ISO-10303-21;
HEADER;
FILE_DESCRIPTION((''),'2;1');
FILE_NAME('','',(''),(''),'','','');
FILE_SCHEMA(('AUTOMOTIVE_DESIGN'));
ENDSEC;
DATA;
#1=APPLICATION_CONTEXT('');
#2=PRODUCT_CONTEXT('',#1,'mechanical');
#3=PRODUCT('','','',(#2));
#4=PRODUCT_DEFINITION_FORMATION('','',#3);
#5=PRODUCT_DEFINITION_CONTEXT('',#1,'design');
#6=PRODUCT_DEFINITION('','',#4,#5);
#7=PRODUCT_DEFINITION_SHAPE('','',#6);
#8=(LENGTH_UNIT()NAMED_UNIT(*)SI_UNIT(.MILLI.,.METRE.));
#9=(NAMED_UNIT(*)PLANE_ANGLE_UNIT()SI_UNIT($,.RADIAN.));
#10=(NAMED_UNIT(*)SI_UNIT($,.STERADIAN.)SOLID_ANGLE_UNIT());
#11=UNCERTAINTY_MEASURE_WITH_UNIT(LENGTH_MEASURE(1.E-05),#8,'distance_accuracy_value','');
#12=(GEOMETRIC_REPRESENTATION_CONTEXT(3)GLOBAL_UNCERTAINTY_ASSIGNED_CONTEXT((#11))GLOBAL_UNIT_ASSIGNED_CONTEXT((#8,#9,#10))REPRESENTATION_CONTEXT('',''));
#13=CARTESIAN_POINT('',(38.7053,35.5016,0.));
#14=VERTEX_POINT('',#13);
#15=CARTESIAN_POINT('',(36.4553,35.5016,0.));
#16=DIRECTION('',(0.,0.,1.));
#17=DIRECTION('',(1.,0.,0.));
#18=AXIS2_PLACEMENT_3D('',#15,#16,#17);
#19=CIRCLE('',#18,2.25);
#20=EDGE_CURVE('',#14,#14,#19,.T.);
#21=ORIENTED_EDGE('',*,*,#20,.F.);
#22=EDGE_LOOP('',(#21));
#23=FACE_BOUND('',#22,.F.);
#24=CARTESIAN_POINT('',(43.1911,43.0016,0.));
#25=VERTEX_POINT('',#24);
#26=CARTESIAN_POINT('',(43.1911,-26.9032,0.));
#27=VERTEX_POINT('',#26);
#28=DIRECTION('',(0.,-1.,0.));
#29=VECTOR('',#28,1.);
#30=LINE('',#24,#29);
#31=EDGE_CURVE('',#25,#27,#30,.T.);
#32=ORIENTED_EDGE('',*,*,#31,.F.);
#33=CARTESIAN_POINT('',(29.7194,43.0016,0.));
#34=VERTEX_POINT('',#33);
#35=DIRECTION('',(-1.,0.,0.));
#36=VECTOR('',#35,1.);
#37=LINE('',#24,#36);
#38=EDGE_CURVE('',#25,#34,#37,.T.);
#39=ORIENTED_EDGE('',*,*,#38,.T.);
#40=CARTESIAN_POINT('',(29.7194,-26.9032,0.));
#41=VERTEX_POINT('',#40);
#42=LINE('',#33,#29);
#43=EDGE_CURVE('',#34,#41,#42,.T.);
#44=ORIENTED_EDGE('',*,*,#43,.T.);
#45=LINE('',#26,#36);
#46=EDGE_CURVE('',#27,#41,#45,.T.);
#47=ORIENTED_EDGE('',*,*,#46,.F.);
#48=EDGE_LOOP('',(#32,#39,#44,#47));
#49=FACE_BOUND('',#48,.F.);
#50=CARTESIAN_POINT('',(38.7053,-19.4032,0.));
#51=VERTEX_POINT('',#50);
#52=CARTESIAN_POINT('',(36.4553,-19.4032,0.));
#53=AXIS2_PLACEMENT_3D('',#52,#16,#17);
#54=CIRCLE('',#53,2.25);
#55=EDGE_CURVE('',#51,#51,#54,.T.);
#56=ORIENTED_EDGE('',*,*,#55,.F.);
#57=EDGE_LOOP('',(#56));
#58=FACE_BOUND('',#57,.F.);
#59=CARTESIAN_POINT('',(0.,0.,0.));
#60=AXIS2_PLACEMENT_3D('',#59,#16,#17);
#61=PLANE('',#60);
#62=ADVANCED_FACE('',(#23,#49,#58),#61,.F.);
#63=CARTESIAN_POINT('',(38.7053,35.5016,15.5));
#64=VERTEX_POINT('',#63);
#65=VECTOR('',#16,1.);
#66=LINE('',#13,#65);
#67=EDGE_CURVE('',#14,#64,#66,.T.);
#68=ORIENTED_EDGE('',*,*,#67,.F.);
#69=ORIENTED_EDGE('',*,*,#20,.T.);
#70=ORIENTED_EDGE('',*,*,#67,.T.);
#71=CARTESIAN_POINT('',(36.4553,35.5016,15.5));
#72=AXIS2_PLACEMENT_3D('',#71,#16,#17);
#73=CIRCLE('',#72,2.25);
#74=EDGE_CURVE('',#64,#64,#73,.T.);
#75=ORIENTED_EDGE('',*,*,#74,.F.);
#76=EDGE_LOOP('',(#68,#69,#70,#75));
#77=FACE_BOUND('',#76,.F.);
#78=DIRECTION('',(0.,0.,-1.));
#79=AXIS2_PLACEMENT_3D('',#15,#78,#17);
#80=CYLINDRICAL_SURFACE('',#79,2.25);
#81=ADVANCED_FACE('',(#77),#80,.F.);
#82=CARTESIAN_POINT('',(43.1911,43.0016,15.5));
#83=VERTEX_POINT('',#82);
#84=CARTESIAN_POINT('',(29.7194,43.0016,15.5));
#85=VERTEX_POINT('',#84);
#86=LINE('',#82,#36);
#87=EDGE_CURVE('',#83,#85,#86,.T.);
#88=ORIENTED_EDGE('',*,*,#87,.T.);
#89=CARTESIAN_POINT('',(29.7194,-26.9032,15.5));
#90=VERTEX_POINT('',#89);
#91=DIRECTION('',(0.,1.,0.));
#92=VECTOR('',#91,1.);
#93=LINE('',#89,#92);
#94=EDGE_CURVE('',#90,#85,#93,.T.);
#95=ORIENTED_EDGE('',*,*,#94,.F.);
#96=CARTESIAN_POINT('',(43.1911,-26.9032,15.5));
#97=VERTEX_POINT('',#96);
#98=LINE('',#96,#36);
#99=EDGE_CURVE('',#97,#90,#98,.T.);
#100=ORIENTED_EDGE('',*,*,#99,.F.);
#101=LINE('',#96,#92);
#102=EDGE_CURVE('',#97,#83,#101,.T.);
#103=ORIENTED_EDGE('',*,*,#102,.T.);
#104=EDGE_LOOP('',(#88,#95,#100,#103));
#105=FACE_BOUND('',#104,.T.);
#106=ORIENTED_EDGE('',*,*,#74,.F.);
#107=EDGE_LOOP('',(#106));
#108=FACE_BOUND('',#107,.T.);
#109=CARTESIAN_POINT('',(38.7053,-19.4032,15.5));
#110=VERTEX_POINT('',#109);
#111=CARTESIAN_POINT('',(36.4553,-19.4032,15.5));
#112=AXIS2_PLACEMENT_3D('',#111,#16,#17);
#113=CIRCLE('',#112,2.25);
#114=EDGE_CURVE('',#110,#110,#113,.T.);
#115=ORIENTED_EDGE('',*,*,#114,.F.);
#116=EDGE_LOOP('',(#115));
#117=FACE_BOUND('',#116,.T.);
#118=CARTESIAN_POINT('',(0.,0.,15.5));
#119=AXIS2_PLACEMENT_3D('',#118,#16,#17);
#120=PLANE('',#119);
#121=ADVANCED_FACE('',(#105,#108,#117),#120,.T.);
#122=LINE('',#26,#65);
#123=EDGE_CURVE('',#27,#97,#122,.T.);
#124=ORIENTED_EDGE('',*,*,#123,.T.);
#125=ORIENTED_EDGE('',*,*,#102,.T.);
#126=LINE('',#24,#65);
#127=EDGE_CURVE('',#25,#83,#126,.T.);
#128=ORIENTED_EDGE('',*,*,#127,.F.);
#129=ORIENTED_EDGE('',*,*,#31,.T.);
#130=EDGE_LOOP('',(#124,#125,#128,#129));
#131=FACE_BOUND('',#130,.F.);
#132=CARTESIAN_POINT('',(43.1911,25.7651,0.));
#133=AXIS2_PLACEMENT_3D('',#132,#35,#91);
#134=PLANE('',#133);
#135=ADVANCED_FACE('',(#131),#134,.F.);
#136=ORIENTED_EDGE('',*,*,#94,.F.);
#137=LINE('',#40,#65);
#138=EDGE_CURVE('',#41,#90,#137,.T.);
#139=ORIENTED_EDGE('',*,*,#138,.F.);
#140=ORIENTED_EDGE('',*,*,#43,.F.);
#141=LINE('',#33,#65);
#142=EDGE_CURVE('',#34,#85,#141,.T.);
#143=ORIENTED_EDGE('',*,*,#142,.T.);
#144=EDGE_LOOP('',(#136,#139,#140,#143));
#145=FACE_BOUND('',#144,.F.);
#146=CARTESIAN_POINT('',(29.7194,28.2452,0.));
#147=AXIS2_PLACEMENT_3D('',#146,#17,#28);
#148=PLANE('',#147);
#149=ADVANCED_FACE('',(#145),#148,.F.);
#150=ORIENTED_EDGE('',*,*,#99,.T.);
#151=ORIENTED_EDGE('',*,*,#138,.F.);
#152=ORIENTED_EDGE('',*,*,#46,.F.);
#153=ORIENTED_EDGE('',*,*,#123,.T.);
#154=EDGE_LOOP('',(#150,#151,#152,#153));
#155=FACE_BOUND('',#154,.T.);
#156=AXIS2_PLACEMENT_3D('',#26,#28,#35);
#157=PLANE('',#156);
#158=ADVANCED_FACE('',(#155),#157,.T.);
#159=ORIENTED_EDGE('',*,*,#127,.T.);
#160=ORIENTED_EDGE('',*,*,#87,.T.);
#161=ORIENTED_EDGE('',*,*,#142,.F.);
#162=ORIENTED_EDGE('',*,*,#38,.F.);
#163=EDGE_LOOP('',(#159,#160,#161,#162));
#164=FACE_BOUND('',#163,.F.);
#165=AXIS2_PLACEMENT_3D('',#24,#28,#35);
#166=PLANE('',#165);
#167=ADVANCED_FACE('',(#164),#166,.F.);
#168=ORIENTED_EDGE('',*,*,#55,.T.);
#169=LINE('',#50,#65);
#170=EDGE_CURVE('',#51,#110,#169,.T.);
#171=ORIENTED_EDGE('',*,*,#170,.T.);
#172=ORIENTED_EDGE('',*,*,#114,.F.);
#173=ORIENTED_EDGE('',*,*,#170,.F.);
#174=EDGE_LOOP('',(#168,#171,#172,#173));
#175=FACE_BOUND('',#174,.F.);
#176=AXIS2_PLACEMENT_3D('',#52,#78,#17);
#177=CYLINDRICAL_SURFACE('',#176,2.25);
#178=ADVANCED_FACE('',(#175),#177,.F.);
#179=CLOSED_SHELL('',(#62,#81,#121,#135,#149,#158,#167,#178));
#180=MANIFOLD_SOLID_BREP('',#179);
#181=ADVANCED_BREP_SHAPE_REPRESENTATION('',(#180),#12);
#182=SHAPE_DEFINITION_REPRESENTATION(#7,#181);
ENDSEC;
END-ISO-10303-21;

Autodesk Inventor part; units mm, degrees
ref_plane "YZ Plane" through (0, 0, 0) normal (1, 0, 0) x (0, 1, 0)
ref_plane "XZ Plane" through (0, 0, 0) normal (0, 1, 0) x (-1, 0, 0)
ref_plane "XY Plane" through (0, 0, 0) normal (0, 0, 1) x (1, 0, 0)
ref_plane "Plan de construction1" through (0, 0, 0) normal (0, 0, 1) x (1, 0, 0)
sketch "Esquisse1" plane through (0, 0, 0) normal (0, 0, 1) x (1, 0, 0)
  circle A0 centre (36.4553, 35.5016) radius 2.25 projected
  line L0 (29.7194, 25.7651) -> (43.1911, 25.7651) projected
  line L1 (43.1911, 25.7651) -> (43.1911, 43.0016) projected
  line L2 (43.1911, 43.0016) -> (29.7194, 43.0016) projected
  line L3 (29.7194, 43.0016) -> (29.7194, 25.7651) projected
  circle A1 centre (36.4553, -19.4032) radius 2.25 projected
  circle A2 centre (36.4553, 35.5016) radius 2.25 projected
  circle A3 centre (25.0518, -6.7548) radius 2.15 projected
  circle A4 centre (25.0518, 23.2452) radius 2.15 projected
  line L4 (43.1911, 43.0016) -> (43.1911, -26.9032) projected
  line L5 (29.7194, 43.0016) -> (43.1911, 43.0016) projected
  line L6 (29.7194, 28.2452) -> (29.7194, 43.0016) projected
  line L7 (29.7194, 28.2452) -> (19.7194, 28.2452) projected
  line L8 (19.7194, 28.2452) -> (19.7194, 19.2452) projected
  line L9 (19.7194, 19.2452) -> (38.63, 19.2452) projected
  line L10 (38.63, 19.2452) -> (38.63, -2.9032) projected
  line L11 (38.63, -2.9032) -> (19.7194, -2.9032) projected
  line L12 (19.7194, -2.9032) -> (19.7194, -11.9032) projected
  line L13 (19.7194, -11.9032) -> (29.7194, -11.9032) projected
  line L14 (29.7194, -26.9032) -> (29.7194, -11.9032) projected
  line L15 (43.1911, -26.9032) -> (29.7194, -26.9032) projected
  line L16 (43.1911, 43.0016) -> (29.7194, 43.0016)
  line L17 (29.7194, 43.0016) -> (29.7194, -26.9032)
  line L18 (29.7194, -26.9032) -> (43.1911, -26.9032)
  line L19 (43.1911, -26.9032) -> (43.1911, 43.0016)
  point P0 (0, 0)
extrude "Extrusion1" add sketch "Esquisse1" along normal blind 15.5 contours L3 L2 L1 L0 | L0 L4 L15 L14 L17 L11 L10 L9 | L9 L10 L11 L17
properties part number "tg"
